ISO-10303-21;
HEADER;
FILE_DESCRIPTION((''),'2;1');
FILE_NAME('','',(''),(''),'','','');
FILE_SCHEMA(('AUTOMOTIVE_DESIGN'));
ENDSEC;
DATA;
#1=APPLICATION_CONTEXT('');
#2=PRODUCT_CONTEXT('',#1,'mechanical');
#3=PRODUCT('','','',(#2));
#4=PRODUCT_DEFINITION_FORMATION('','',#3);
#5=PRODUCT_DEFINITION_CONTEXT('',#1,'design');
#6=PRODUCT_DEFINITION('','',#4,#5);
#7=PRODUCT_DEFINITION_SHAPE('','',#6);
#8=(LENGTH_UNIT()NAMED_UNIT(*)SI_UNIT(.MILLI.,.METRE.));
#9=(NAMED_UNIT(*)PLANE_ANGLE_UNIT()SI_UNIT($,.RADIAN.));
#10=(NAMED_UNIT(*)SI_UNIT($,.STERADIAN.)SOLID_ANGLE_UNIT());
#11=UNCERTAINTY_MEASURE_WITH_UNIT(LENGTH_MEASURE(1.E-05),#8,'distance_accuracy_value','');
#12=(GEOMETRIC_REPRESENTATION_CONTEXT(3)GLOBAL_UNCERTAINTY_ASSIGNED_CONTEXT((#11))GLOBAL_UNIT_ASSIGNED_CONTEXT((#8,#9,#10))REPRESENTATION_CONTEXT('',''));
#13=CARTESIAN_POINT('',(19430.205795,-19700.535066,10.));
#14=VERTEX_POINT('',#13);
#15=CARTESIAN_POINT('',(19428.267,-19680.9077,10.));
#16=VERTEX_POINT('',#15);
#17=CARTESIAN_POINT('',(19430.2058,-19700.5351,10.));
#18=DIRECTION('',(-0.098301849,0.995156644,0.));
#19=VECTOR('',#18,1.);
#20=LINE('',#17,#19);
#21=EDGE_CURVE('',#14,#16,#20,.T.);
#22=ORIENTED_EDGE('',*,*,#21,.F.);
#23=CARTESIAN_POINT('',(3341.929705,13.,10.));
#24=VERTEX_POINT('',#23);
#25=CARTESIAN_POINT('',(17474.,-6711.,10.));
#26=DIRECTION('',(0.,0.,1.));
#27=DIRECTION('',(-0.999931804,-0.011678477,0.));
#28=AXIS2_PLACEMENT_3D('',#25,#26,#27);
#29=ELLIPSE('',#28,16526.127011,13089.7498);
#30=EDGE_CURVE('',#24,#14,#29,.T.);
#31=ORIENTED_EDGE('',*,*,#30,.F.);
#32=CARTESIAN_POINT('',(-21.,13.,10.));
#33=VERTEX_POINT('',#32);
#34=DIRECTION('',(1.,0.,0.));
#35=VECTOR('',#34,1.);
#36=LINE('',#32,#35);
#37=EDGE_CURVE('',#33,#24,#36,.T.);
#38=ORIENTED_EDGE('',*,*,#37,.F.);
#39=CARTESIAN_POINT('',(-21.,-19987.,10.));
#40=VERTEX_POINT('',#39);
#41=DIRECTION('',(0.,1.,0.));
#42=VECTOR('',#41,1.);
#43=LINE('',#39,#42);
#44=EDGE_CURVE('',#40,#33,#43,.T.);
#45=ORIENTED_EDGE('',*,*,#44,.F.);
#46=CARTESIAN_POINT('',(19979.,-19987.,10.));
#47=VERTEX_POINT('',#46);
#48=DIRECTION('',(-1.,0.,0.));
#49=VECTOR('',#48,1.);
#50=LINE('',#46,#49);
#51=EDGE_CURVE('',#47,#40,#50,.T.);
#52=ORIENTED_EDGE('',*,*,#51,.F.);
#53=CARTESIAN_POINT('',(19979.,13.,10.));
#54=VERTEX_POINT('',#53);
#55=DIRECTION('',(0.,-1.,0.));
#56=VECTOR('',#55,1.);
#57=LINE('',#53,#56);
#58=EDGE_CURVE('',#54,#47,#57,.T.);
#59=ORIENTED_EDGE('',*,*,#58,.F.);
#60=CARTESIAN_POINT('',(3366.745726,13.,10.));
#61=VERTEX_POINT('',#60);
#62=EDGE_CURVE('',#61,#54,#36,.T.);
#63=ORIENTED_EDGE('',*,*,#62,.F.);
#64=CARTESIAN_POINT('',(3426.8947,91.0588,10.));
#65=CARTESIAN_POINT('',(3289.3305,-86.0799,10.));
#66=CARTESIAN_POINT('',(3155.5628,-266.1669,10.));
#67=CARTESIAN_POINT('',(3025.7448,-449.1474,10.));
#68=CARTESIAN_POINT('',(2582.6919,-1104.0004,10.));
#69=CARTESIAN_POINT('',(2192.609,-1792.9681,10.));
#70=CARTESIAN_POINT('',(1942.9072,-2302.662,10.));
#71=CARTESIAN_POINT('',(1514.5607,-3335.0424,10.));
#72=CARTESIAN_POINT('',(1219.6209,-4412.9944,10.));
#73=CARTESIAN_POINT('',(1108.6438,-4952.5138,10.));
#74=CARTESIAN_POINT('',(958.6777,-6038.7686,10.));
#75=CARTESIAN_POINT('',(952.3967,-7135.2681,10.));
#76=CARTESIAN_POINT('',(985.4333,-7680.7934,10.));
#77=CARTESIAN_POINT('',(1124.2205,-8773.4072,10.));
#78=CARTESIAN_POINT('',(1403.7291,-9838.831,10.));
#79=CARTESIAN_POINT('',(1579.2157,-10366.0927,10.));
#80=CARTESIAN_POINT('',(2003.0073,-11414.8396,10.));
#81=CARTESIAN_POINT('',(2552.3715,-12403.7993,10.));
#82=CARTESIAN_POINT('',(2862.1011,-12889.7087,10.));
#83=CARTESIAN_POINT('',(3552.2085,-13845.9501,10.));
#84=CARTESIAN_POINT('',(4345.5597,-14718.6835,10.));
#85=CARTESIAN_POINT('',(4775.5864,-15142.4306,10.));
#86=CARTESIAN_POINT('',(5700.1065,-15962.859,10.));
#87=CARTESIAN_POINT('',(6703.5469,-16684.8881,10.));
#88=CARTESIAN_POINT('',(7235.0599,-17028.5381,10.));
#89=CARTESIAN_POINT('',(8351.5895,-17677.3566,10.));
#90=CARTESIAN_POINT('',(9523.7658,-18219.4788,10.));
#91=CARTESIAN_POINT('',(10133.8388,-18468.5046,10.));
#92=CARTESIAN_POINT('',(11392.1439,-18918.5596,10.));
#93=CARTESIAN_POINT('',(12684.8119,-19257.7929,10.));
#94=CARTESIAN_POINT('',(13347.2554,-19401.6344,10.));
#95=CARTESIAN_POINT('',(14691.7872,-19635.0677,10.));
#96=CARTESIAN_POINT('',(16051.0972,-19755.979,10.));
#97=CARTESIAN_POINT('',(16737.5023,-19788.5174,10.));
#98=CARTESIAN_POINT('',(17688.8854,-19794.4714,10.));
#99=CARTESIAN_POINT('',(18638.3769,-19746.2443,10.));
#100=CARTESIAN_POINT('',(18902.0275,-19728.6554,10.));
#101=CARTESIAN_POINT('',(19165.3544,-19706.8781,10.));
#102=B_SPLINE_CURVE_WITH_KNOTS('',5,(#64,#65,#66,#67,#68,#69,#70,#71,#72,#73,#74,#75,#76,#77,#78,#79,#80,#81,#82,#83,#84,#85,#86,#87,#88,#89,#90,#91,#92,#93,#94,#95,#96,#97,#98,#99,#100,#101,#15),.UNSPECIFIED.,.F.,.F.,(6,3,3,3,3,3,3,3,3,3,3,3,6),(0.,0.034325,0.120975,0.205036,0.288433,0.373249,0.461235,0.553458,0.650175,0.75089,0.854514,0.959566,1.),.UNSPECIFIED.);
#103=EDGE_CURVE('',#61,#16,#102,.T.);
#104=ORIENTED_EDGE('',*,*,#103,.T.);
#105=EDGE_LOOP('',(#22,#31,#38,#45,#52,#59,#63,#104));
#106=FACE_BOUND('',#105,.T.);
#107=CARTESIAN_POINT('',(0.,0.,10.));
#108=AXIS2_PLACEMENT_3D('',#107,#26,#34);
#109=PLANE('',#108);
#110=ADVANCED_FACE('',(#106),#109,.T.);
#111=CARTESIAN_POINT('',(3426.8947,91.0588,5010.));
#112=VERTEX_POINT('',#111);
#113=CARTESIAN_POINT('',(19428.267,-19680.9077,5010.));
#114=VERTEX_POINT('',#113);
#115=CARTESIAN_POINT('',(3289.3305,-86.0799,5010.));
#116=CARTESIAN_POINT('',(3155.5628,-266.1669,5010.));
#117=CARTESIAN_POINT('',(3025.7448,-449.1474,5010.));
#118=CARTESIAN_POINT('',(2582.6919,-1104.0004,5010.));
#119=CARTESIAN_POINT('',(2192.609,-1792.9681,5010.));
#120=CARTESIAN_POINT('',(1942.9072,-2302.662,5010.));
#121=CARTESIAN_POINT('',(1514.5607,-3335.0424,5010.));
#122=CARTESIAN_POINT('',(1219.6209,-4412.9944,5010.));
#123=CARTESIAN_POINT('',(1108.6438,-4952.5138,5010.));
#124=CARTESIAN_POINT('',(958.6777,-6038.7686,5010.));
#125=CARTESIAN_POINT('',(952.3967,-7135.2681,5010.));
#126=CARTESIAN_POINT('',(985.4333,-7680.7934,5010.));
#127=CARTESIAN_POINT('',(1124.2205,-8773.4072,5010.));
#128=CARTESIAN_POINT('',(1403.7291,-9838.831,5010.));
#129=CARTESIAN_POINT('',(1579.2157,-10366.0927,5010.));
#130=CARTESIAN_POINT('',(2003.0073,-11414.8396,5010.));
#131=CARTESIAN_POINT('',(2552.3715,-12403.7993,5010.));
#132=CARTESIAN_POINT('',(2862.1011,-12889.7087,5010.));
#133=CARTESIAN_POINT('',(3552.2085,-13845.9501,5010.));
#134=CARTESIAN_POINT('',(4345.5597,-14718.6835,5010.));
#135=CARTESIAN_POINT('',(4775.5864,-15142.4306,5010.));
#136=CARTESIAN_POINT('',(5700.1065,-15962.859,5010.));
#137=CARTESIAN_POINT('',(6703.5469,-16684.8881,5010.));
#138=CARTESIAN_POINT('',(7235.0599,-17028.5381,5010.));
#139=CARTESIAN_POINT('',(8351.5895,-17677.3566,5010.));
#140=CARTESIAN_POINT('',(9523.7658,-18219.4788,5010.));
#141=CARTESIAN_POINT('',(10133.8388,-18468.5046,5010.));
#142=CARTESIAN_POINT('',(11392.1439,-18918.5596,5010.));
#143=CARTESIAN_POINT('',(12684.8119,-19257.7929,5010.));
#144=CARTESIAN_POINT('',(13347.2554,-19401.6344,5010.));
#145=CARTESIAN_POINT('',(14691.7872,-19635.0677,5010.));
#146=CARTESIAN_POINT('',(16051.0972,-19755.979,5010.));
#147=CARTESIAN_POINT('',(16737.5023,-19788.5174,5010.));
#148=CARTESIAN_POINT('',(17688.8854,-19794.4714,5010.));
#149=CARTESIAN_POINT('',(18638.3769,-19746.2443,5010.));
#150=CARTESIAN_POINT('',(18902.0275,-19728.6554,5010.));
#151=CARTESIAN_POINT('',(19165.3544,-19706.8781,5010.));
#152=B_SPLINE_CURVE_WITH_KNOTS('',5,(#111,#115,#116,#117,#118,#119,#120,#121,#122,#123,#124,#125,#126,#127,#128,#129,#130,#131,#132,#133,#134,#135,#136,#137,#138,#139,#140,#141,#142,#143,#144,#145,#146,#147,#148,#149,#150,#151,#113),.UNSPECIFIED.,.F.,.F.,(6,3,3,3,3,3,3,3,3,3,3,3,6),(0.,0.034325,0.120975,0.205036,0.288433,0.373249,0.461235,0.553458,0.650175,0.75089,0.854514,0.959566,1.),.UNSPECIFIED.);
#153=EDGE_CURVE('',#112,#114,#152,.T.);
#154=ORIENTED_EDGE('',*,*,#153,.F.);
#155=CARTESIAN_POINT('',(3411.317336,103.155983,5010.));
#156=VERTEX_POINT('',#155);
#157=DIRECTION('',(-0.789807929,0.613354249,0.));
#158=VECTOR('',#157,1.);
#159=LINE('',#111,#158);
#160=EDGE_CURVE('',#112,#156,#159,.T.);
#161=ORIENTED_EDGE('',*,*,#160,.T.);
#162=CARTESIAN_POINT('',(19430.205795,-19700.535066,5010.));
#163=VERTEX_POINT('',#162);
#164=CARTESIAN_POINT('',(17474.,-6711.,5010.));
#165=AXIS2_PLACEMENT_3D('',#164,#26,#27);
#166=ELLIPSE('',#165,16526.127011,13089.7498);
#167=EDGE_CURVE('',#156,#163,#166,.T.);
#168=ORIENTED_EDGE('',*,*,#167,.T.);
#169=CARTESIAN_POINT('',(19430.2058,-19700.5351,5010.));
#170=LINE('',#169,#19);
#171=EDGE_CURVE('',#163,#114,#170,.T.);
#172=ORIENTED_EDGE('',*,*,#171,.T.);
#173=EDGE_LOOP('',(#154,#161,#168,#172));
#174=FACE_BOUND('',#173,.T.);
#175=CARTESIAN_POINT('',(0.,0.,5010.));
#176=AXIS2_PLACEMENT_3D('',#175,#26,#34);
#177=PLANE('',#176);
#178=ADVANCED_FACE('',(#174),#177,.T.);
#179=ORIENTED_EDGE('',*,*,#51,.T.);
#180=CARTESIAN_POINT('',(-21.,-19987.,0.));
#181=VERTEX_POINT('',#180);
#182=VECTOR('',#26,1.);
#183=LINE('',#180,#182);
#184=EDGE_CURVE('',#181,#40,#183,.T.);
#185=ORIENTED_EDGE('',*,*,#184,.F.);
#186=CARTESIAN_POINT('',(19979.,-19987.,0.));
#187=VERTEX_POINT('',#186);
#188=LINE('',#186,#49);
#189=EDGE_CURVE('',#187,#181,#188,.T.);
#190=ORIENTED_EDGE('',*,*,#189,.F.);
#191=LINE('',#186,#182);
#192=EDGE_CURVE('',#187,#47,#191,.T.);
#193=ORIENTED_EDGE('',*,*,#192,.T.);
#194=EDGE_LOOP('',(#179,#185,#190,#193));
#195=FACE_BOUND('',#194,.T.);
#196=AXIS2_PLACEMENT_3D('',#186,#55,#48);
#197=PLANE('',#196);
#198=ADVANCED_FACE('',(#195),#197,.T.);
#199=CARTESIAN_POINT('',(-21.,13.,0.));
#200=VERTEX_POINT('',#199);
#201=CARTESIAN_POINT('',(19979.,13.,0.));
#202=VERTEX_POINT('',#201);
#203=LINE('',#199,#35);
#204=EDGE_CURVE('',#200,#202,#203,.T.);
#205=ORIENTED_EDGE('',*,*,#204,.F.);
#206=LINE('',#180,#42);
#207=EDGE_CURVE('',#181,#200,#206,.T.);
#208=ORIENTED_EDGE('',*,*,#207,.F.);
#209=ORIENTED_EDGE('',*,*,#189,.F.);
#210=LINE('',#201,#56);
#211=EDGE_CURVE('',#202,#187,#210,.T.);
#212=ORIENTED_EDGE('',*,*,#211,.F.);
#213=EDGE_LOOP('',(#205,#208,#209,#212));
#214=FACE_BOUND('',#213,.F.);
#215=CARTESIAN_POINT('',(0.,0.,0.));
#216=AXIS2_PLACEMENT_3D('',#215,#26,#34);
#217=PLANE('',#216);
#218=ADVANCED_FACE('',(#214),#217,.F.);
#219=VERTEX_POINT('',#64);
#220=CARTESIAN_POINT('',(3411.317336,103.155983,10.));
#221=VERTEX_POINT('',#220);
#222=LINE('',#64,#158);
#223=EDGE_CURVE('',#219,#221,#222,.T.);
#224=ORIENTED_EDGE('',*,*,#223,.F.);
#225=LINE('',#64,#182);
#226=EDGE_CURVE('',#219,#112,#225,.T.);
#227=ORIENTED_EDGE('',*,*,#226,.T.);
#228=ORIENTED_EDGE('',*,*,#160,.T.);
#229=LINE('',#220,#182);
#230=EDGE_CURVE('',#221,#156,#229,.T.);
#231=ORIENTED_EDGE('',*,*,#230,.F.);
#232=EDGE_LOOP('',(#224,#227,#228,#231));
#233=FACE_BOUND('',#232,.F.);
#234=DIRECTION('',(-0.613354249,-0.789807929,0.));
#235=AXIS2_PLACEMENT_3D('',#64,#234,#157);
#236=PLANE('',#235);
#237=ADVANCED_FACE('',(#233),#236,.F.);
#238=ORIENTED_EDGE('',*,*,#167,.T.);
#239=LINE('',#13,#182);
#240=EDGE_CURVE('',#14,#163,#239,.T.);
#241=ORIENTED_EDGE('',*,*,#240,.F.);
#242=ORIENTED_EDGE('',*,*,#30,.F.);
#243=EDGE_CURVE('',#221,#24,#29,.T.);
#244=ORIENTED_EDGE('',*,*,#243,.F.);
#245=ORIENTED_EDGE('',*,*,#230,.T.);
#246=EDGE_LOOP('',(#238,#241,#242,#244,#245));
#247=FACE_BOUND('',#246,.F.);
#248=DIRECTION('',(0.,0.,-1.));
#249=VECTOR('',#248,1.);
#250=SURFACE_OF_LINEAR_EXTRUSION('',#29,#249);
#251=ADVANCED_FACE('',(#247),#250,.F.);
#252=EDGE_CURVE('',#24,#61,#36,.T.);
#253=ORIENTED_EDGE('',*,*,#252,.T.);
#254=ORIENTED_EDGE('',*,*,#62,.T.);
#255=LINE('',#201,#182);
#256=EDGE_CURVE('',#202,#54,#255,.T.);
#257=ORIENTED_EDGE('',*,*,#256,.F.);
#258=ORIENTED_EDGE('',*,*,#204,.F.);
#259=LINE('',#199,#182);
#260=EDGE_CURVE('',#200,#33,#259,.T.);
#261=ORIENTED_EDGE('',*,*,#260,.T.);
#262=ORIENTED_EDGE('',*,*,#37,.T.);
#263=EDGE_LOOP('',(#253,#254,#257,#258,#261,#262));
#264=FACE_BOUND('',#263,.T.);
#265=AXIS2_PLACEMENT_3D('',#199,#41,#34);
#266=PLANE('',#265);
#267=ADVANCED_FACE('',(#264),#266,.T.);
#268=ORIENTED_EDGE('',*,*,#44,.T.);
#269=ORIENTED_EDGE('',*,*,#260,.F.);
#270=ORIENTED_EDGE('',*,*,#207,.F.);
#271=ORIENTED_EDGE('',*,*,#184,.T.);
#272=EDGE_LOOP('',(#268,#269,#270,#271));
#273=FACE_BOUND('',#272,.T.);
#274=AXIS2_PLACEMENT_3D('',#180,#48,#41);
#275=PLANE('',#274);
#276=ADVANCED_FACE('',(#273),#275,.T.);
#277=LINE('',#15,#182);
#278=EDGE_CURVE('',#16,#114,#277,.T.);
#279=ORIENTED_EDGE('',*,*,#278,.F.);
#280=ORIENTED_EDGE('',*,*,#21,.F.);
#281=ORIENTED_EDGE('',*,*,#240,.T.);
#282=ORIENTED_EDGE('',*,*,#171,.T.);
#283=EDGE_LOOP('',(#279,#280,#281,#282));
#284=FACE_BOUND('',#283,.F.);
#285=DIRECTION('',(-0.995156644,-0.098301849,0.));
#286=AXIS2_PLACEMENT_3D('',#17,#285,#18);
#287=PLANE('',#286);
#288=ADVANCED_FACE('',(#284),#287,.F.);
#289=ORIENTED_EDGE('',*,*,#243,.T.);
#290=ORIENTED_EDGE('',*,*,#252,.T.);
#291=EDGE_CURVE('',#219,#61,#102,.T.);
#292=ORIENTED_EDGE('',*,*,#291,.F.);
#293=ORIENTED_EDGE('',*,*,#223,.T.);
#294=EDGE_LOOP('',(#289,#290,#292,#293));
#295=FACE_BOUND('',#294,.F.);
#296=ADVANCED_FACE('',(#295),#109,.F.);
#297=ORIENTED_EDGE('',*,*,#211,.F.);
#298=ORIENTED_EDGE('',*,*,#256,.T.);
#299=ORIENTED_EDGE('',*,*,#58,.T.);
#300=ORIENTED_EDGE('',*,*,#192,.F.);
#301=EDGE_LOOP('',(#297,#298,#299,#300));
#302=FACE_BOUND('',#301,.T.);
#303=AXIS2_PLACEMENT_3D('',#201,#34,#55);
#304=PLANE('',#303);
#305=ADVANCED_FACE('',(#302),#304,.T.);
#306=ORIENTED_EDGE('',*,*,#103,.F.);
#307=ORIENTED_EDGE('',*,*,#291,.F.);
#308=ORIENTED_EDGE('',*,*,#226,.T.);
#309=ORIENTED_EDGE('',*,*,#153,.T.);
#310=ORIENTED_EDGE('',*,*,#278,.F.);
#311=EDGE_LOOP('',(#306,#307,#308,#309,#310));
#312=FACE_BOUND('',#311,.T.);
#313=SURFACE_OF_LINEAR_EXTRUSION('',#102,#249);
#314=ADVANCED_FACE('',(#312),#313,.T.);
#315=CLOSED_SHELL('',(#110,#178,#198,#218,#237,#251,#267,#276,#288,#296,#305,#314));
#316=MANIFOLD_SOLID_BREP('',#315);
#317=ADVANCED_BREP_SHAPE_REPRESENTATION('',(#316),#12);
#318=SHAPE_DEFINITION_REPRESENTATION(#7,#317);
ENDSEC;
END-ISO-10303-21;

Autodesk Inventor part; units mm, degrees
ref_plane "YZ Plane" through (0, 0, 0) normal (1, 0, 0) x (0, 1, 0)
ref_plane "XZ Plane" through (0, 0, 0) normal (0, 1, 0) x (-1, 0, 0)
sketch "Sketch1" plane through (0, 0, 0) normal (0, 0, 1) x (1, 0, 0)
  line L0 (-21, 13) -> (19979, 13)
  line L1 (19979, 13) -> (19979, -19987)
  line L2 (19979, -19987) -> (-21, -19987)
  line L3 (-21, -19987) -> (-21, 13)
  point P0 (0, 0)
  dimension "d0" = 20000
  dimension "d1" = 20000
extrude "Extrusion1" add sketch "Sketch1" along normal blind 10
sketch "Sketch3" plane through (0, 0, 10) normal (0, 0, 1) x (1, 0, 0)
  ellipse E0 centre (17474, -6711) end of major axis (949, -6904) minor radius 13089.7498 (3411.3173, 103.156) -> (19430.2058, -19700.5351) ccw
  line L0 (19491, -21143) -> (18773, -4107) construction
  line L1 (18773, -4107) -> (949, 778) construction
  line L2 (19430.2058, -19700.5351) -> (19428.267, -19680.9077)
  line L3 (3426.8947, 91.0588) -> (3411.3173, 103.156)
  spline S0 degree 5 poles (3426.8946, 91.0588) (3289.3305, -86.0799) (3155.5628, -266.1669) (3025.7448, -449.1474) (2582.6919, -1104.0004) (2192.609, -1792.9681) (1942.9072, -2302.662) (1514.5607, -3335.0424) (1219.6209, -4412.9944) (1108.6438, -4952.5138) (958.6777, -6038.7686) (952.3967, -7135.2681) (985.4333, -7680.7934) (1124.2205, -8773.4072) (1403.7291, -9838.831) (1579.2157, -10366.0927) (2003.0073, -11414.8396) (2552.3715, -12403.7993) (2862.1011, -12889.7087) (3552.2085, -13845.9501) (4345.5597, -14718.6835) (4775.5864, -15142.4306) (5700.1065, -15962.859) (6703.5469, -16684.8881) (7235.0599, -17028.5381) (8351.5895, -17677.3566) (9523.7658, -18219.4788) (10133.8388, -18468.5046) (11392.1439, -18918.5596) (12684.8119, -19257.7929) (13347.2554, -19401.6344) (14691.7872, -19635.0677) (16051.0972, -19755.979) (16737.5023, -19788.5174) (17688.8854, -19794.4714) (18638.3769, -19746.2443) (18902.0275, -19728.6554) (19165.3544, -19706.8781) (19428.267, -19680.9077) knots 0 0 0 0 0 0 0.034325 0.034325 0.034325 0.120975 0.120975 0.120975 0.205036 0.205036 0.205036 0.288433 0.288433 0.288433 0.373249 0.373249 0.373249 0.461235 0.461235 0.461235 0.553458 0.553458 0.553458 0.650175 0.650175 0.650175 0.75089 0.75089 0.75089 0.854514 0.854514 0.854514 0.959566 0.959566 0.959566 1 1 1 1 1 1
  point P0 (0, 0)
  dimension "d6" = 19.7229
extrude "Extrusion3" add sketch "Sketch3" along normal blind 5000
ref_plane "Work Plane1" through (19428.267, -19680.9077, 5010) normal (0.7773315, 0.6290912, 0) x (0, 0, -1)
sketch "Sketch4" plane through (19428.267, -19680.9077, 5010) normal (0.7773315, 0.6290912, 0) x (0, 0, -1)
  line L0 (-4491.9999, 841.2222) -> (-4491.9999, 20653.222) construction
  line L1 (-4491.9999, 20653.222) -> (5414, 20653.222) construction
  line L2 (5414, 20653.222) -> (5414, 841.2222) construction
  line L3 (5414, 841.2222) -> (-4491.9999, 841.2222) construction
  point P0 (5010, 27520.7414)
properties part number "baraca"
